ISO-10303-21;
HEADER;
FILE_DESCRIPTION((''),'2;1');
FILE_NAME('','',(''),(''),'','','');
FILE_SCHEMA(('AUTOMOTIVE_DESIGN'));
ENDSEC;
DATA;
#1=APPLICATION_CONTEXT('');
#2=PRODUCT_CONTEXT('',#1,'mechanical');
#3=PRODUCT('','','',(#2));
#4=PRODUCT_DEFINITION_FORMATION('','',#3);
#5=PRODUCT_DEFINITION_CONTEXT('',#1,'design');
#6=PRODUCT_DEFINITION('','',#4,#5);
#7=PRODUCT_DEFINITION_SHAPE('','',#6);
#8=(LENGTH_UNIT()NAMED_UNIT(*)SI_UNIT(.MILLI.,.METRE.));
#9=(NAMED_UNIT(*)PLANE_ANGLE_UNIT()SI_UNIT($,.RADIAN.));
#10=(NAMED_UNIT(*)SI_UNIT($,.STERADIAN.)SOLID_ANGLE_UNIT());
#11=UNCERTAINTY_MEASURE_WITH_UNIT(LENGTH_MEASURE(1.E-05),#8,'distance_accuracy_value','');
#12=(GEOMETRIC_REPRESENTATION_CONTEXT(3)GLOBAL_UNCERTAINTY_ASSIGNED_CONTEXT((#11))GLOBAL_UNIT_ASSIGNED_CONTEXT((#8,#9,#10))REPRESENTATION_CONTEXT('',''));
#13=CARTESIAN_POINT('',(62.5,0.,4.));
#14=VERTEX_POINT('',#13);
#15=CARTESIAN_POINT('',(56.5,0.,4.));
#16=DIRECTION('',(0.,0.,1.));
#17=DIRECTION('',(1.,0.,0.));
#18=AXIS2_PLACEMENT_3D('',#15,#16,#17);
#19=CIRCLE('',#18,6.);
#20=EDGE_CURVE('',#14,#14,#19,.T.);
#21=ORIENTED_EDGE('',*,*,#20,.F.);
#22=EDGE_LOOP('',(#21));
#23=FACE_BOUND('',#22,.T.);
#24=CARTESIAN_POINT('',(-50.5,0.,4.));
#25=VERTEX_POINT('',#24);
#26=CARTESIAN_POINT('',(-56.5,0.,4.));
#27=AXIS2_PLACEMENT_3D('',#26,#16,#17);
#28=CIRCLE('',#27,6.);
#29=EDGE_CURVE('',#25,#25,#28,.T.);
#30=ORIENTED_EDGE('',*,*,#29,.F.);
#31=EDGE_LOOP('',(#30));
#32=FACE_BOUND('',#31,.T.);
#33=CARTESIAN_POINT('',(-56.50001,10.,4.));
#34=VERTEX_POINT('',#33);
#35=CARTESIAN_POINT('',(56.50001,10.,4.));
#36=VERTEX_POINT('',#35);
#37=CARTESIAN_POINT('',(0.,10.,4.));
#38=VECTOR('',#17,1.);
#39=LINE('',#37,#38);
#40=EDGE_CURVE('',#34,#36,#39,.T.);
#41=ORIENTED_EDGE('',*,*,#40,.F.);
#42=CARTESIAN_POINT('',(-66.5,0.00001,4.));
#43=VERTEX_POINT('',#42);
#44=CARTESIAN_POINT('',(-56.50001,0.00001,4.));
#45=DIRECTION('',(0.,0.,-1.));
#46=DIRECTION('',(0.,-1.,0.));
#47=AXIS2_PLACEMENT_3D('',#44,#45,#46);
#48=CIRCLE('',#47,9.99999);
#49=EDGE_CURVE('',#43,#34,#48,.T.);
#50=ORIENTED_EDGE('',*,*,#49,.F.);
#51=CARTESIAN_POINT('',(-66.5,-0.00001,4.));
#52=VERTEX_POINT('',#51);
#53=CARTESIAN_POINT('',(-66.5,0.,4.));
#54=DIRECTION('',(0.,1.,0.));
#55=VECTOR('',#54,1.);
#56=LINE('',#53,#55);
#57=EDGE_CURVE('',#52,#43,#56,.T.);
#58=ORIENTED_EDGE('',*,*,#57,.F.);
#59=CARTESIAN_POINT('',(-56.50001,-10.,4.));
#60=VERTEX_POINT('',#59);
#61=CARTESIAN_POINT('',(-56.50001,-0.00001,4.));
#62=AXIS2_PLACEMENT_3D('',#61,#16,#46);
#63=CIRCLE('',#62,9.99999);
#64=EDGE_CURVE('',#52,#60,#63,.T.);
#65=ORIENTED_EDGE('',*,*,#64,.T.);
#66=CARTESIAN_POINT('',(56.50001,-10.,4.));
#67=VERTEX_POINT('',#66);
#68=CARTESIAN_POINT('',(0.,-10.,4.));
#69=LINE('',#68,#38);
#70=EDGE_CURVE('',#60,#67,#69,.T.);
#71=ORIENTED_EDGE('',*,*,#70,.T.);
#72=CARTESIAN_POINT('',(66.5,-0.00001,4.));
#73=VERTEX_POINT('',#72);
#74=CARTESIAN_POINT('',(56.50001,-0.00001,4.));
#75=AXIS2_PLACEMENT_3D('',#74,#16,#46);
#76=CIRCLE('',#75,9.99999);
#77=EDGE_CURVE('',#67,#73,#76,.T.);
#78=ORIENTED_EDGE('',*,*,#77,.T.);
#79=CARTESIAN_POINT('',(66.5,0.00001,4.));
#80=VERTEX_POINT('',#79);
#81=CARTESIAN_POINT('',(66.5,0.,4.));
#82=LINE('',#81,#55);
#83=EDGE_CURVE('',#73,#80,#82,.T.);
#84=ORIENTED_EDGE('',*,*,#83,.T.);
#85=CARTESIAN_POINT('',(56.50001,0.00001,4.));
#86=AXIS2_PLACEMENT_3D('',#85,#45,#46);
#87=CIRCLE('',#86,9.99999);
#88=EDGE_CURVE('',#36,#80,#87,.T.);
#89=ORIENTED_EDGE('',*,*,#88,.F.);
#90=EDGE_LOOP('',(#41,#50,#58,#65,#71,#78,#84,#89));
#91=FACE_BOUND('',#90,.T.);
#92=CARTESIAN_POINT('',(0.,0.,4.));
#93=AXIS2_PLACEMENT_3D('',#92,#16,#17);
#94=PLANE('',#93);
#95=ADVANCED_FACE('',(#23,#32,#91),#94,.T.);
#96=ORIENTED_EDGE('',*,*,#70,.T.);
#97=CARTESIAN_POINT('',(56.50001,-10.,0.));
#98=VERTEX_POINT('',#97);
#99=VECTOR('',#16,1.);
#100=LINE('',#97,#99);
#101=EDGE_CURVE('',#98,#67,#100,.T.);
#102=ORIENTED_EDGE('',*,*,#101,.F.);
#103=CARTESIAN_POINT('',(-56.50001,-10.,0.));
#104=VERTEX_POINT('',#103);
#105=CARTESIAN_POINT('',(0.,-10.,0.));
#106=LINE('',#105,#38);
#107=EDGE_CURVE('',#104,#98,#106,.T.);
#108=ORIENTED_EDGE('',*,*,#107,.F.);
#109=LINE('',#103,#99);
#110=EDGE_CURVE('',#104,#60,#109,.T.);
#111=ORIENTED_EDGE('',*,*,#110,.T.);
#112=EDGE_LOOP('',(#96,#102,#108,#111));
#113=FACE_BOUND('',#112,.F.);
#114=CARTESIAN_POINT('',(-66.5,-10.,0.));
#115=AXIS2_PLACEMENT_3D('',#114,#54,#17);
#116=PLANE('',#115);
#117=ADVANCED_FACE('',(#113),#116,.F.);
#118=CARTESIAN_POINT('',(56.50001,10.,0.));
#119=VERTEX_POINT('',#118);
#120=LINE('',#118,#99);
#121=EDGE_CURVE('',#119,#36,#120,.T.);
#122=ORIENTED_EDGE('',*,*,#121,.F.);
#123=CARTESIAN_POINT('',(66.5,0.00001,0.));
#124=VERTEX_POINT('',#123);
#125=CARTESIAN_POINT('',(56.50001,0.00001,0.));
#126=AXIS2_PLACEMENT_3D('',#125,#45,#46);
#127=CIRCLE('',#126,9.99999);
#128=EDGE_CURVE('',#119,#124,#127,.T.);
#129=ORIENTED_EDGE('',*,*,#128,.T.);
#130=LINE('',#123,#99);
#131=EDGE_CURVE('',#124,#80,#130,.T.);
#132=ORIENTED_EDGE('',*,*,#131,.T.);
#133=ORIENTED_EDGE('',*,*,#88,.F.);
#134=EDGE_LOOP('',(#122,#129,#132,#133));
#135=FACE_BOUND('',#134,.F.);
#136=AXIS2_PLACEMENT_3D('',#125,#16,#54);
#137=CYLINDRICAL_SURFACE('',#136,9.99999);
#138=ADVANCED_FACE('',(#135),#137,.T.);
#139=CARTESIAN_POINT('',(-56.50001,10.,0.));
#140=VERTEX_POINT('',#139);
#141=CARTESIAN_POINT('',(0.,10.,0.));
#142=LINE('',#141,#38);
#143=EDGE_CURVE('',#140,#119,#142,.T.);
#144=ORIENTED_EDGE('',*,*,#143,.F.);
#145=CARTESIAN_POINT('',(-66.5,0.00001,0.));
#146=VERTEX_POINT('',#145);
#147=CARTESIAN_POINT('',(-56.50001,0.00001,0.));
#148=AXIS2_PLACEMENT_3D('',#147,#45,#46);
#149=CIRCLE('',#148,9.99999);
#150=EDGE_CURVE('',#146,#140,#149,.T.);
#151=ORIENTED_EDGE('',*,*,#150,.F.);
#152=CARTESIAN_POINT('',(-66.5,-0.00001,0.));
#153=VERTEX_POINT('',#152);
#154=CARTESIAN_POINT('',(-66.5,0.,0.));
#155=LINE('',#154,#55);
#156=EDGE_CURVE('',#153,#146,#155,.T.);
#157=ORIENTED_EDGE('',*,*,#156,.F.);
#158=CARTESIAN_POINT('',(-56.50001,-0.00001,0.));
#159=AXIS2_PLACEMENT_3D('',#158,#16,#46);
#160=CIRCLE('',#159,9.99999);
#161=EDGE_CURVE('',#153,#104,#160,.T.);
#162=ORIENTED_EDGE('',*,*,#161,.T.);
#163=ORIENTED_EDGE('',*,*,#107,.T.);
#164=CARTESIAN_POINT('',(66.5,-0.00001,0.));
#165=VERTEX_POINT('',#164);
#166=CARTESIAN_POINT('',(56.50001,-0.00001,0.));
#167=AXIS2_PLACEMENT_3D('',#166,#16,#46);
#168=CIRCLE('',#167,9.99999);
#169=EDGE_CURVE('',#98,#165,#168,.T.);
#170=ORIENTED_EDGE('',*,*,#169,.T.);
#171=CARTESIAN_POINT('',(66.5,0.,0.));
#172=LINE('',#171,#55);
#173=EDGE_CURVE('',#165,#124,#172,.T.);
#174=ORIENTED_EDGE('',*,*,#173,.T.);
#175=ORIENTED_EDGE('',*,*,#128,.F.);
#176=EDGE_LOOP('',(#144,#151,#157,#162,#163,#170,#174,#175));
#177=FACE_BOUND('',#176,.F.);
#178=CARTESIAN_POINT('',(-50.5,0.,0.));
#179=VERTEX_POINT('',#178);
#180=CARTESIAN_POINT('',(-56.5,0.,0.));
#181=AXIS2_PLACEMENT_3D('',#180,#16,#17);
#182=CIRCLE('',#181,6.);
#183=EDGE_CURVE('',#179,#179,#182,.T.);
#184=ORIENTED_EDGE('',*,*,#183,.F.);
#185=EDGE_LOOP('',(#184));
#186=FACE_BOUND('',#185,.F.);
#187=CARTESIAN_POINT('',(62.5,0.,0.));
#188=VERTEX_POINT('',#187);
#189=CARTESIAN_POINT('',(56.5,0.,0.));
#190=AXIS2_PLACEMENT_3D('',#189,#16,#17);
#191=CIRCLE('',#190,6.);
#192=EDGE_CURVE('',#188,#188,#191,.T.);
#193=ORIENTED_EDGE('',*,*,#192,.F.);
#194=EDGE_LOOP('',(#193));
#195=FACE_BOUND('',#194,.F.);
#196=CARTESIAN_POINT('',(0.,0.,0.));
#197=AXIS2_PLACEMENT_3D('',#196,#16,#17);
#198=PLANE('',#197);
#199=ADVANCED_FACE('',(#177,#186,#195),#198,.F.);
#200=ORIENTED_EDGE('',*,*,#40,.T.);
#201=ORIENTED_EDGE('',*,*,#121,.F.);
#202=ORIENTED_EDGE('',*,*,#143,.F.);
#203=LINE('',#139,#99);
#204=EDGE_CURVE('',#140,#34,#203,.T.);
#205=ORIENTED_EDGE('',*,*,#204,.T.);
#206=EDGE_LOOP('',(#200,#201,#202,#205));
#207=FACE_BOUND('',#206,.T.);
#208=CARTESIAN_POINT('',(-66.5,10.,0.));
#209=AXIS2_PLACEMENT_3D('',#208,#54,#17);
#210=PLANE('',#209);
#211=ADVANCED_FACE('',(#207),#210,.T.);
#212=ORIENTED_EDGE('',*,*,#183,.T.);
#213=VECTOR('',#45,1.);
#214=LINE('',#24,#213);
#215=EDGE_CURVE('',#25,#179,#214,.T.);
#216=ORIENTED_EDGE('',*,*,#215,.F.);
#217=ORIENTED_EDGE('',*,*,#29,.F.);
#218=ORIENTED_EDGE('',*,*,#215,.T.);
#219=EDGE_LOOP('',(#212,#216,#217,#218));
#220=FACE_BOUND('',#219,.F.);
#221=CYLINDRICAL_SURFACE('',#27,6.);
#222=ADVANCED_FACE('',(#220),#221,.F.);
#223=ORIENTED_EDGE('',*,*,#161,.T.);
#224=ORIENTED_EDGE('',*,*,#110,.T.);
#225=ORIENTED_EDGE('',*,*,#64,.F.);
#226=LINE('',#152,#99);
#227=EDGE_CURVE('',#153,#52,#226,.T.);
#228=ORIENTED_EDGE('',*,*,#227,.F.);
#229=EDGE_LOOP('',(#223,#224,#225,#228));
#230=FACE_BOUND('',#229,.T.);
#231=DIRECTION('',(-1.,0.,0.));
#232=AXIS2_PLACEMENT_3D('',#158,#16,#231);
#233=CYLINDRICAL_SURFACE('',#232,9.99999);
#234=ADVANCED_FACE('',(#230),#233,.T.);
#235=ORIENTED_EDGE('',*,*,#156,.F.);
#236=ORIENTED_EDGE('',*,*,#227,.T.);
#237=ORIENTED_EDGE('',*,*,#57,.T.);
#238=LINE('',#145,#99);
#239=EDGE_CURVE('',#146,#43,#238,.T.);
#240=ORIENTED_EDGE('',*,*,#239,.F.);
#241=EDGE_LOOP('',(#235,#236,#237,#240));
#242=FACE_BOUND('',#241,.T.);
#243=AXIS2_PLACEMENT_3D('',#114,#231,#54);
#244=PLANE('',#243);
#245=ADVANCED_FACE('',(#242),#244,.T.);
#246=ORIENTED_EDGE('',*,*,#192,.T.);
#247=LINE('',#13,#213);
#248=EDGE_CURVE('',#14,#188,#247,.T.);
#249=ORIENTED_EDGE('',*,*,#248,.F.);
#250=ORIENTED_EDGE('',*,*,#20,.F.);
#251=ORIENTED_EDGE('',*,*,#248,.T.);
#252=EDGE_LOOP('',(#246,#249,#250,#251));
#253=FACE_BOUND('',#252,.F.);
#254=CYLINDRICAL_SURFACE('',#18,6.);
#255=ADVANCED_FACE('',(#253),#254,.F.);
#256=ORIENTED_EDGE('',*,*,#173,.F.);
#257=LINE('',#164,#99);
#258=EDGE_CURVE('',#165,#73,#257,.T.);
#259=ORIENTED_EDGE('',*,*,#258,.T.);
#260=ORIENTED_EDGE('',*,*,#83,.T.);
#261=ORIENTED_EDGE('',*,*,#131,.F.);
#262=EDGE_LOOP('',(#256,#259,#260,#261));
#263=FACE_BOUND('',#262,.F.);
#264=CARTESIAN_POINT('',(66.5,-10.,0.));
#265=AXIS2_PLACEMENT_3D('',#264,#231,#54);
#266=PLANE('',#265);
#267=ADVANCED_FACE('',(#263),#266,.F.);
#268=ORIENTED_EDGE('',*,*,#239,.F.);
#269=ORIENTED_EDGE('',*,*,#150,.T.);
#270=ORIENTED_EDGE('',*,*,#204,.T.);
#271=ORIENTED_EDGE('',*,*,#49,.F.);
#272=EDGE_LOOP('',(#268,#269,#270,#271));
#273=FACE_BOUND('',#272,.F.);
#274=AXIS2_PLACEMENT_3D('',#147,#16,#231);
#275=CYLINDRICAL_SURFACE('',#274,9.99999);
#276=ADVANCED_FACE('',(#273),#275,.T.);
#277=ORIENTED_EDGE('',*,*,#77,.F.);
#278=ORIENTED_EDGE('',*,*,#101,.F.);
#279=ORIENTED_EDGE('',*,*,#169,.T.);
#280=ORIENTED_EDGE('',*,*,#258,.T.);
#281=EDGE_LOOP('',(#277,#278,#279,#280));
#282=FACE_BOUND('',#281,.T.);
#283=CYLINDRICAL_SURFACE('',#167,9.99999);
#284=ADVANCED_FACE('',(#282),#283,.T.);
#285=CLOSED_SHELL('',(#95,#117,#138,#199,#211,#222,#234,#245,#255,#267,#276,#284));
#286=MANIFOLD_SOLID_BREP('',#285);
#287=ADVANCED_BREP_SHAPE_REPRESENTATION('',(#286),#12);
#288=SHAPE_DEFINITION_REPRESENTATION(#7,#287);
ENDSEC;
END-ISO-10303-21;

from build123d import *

# Parameters (mm, degrees)
F0_W     = 133
F0_H     = 20
F1_DEPTH = 4
F2_R     = 6
F3_DEPTH = 4.001
F4_R     = 9.99999


# Not quite as in the source:
# - a fillet or chamfer is up to 0.001 mm smaller than in the source, because OpenCascade refuses the exact size


with BuildPart() as f1:
    # F0 (on Top) → F1 (new body)
    with BuildSketch(Plane.XY):
        Rectangle(F0_W, F0_H)
    extrude(amount=F1_DEPTH)

    # F2 (on face) → F3 (cut, through all)
    with BuildSketch(Plane.XY.offset(4)):
        with Locations((-56.5, 0)):
            Circle(F2_R)
        with Locations((56.5, 0)):
            Circle(F2_R)
    extrude(amount=-F3_DEPTH, mode=Mode.SUBTRACT)

    # F4 (radius 10 in the source; OpenCascade refuses exactly that, so slightly less here)
    f4_edges = [f1.edges().sort_by_distance(p)[0] for p in [
        (-66.5, -10, 2),
        (-66.5, 10, 2),
        (66.5, -10, 2),
        (66.5, 10, 2),
    ]]
    fillet(f4_edges, radius=F4_R)


solid = f1.part
